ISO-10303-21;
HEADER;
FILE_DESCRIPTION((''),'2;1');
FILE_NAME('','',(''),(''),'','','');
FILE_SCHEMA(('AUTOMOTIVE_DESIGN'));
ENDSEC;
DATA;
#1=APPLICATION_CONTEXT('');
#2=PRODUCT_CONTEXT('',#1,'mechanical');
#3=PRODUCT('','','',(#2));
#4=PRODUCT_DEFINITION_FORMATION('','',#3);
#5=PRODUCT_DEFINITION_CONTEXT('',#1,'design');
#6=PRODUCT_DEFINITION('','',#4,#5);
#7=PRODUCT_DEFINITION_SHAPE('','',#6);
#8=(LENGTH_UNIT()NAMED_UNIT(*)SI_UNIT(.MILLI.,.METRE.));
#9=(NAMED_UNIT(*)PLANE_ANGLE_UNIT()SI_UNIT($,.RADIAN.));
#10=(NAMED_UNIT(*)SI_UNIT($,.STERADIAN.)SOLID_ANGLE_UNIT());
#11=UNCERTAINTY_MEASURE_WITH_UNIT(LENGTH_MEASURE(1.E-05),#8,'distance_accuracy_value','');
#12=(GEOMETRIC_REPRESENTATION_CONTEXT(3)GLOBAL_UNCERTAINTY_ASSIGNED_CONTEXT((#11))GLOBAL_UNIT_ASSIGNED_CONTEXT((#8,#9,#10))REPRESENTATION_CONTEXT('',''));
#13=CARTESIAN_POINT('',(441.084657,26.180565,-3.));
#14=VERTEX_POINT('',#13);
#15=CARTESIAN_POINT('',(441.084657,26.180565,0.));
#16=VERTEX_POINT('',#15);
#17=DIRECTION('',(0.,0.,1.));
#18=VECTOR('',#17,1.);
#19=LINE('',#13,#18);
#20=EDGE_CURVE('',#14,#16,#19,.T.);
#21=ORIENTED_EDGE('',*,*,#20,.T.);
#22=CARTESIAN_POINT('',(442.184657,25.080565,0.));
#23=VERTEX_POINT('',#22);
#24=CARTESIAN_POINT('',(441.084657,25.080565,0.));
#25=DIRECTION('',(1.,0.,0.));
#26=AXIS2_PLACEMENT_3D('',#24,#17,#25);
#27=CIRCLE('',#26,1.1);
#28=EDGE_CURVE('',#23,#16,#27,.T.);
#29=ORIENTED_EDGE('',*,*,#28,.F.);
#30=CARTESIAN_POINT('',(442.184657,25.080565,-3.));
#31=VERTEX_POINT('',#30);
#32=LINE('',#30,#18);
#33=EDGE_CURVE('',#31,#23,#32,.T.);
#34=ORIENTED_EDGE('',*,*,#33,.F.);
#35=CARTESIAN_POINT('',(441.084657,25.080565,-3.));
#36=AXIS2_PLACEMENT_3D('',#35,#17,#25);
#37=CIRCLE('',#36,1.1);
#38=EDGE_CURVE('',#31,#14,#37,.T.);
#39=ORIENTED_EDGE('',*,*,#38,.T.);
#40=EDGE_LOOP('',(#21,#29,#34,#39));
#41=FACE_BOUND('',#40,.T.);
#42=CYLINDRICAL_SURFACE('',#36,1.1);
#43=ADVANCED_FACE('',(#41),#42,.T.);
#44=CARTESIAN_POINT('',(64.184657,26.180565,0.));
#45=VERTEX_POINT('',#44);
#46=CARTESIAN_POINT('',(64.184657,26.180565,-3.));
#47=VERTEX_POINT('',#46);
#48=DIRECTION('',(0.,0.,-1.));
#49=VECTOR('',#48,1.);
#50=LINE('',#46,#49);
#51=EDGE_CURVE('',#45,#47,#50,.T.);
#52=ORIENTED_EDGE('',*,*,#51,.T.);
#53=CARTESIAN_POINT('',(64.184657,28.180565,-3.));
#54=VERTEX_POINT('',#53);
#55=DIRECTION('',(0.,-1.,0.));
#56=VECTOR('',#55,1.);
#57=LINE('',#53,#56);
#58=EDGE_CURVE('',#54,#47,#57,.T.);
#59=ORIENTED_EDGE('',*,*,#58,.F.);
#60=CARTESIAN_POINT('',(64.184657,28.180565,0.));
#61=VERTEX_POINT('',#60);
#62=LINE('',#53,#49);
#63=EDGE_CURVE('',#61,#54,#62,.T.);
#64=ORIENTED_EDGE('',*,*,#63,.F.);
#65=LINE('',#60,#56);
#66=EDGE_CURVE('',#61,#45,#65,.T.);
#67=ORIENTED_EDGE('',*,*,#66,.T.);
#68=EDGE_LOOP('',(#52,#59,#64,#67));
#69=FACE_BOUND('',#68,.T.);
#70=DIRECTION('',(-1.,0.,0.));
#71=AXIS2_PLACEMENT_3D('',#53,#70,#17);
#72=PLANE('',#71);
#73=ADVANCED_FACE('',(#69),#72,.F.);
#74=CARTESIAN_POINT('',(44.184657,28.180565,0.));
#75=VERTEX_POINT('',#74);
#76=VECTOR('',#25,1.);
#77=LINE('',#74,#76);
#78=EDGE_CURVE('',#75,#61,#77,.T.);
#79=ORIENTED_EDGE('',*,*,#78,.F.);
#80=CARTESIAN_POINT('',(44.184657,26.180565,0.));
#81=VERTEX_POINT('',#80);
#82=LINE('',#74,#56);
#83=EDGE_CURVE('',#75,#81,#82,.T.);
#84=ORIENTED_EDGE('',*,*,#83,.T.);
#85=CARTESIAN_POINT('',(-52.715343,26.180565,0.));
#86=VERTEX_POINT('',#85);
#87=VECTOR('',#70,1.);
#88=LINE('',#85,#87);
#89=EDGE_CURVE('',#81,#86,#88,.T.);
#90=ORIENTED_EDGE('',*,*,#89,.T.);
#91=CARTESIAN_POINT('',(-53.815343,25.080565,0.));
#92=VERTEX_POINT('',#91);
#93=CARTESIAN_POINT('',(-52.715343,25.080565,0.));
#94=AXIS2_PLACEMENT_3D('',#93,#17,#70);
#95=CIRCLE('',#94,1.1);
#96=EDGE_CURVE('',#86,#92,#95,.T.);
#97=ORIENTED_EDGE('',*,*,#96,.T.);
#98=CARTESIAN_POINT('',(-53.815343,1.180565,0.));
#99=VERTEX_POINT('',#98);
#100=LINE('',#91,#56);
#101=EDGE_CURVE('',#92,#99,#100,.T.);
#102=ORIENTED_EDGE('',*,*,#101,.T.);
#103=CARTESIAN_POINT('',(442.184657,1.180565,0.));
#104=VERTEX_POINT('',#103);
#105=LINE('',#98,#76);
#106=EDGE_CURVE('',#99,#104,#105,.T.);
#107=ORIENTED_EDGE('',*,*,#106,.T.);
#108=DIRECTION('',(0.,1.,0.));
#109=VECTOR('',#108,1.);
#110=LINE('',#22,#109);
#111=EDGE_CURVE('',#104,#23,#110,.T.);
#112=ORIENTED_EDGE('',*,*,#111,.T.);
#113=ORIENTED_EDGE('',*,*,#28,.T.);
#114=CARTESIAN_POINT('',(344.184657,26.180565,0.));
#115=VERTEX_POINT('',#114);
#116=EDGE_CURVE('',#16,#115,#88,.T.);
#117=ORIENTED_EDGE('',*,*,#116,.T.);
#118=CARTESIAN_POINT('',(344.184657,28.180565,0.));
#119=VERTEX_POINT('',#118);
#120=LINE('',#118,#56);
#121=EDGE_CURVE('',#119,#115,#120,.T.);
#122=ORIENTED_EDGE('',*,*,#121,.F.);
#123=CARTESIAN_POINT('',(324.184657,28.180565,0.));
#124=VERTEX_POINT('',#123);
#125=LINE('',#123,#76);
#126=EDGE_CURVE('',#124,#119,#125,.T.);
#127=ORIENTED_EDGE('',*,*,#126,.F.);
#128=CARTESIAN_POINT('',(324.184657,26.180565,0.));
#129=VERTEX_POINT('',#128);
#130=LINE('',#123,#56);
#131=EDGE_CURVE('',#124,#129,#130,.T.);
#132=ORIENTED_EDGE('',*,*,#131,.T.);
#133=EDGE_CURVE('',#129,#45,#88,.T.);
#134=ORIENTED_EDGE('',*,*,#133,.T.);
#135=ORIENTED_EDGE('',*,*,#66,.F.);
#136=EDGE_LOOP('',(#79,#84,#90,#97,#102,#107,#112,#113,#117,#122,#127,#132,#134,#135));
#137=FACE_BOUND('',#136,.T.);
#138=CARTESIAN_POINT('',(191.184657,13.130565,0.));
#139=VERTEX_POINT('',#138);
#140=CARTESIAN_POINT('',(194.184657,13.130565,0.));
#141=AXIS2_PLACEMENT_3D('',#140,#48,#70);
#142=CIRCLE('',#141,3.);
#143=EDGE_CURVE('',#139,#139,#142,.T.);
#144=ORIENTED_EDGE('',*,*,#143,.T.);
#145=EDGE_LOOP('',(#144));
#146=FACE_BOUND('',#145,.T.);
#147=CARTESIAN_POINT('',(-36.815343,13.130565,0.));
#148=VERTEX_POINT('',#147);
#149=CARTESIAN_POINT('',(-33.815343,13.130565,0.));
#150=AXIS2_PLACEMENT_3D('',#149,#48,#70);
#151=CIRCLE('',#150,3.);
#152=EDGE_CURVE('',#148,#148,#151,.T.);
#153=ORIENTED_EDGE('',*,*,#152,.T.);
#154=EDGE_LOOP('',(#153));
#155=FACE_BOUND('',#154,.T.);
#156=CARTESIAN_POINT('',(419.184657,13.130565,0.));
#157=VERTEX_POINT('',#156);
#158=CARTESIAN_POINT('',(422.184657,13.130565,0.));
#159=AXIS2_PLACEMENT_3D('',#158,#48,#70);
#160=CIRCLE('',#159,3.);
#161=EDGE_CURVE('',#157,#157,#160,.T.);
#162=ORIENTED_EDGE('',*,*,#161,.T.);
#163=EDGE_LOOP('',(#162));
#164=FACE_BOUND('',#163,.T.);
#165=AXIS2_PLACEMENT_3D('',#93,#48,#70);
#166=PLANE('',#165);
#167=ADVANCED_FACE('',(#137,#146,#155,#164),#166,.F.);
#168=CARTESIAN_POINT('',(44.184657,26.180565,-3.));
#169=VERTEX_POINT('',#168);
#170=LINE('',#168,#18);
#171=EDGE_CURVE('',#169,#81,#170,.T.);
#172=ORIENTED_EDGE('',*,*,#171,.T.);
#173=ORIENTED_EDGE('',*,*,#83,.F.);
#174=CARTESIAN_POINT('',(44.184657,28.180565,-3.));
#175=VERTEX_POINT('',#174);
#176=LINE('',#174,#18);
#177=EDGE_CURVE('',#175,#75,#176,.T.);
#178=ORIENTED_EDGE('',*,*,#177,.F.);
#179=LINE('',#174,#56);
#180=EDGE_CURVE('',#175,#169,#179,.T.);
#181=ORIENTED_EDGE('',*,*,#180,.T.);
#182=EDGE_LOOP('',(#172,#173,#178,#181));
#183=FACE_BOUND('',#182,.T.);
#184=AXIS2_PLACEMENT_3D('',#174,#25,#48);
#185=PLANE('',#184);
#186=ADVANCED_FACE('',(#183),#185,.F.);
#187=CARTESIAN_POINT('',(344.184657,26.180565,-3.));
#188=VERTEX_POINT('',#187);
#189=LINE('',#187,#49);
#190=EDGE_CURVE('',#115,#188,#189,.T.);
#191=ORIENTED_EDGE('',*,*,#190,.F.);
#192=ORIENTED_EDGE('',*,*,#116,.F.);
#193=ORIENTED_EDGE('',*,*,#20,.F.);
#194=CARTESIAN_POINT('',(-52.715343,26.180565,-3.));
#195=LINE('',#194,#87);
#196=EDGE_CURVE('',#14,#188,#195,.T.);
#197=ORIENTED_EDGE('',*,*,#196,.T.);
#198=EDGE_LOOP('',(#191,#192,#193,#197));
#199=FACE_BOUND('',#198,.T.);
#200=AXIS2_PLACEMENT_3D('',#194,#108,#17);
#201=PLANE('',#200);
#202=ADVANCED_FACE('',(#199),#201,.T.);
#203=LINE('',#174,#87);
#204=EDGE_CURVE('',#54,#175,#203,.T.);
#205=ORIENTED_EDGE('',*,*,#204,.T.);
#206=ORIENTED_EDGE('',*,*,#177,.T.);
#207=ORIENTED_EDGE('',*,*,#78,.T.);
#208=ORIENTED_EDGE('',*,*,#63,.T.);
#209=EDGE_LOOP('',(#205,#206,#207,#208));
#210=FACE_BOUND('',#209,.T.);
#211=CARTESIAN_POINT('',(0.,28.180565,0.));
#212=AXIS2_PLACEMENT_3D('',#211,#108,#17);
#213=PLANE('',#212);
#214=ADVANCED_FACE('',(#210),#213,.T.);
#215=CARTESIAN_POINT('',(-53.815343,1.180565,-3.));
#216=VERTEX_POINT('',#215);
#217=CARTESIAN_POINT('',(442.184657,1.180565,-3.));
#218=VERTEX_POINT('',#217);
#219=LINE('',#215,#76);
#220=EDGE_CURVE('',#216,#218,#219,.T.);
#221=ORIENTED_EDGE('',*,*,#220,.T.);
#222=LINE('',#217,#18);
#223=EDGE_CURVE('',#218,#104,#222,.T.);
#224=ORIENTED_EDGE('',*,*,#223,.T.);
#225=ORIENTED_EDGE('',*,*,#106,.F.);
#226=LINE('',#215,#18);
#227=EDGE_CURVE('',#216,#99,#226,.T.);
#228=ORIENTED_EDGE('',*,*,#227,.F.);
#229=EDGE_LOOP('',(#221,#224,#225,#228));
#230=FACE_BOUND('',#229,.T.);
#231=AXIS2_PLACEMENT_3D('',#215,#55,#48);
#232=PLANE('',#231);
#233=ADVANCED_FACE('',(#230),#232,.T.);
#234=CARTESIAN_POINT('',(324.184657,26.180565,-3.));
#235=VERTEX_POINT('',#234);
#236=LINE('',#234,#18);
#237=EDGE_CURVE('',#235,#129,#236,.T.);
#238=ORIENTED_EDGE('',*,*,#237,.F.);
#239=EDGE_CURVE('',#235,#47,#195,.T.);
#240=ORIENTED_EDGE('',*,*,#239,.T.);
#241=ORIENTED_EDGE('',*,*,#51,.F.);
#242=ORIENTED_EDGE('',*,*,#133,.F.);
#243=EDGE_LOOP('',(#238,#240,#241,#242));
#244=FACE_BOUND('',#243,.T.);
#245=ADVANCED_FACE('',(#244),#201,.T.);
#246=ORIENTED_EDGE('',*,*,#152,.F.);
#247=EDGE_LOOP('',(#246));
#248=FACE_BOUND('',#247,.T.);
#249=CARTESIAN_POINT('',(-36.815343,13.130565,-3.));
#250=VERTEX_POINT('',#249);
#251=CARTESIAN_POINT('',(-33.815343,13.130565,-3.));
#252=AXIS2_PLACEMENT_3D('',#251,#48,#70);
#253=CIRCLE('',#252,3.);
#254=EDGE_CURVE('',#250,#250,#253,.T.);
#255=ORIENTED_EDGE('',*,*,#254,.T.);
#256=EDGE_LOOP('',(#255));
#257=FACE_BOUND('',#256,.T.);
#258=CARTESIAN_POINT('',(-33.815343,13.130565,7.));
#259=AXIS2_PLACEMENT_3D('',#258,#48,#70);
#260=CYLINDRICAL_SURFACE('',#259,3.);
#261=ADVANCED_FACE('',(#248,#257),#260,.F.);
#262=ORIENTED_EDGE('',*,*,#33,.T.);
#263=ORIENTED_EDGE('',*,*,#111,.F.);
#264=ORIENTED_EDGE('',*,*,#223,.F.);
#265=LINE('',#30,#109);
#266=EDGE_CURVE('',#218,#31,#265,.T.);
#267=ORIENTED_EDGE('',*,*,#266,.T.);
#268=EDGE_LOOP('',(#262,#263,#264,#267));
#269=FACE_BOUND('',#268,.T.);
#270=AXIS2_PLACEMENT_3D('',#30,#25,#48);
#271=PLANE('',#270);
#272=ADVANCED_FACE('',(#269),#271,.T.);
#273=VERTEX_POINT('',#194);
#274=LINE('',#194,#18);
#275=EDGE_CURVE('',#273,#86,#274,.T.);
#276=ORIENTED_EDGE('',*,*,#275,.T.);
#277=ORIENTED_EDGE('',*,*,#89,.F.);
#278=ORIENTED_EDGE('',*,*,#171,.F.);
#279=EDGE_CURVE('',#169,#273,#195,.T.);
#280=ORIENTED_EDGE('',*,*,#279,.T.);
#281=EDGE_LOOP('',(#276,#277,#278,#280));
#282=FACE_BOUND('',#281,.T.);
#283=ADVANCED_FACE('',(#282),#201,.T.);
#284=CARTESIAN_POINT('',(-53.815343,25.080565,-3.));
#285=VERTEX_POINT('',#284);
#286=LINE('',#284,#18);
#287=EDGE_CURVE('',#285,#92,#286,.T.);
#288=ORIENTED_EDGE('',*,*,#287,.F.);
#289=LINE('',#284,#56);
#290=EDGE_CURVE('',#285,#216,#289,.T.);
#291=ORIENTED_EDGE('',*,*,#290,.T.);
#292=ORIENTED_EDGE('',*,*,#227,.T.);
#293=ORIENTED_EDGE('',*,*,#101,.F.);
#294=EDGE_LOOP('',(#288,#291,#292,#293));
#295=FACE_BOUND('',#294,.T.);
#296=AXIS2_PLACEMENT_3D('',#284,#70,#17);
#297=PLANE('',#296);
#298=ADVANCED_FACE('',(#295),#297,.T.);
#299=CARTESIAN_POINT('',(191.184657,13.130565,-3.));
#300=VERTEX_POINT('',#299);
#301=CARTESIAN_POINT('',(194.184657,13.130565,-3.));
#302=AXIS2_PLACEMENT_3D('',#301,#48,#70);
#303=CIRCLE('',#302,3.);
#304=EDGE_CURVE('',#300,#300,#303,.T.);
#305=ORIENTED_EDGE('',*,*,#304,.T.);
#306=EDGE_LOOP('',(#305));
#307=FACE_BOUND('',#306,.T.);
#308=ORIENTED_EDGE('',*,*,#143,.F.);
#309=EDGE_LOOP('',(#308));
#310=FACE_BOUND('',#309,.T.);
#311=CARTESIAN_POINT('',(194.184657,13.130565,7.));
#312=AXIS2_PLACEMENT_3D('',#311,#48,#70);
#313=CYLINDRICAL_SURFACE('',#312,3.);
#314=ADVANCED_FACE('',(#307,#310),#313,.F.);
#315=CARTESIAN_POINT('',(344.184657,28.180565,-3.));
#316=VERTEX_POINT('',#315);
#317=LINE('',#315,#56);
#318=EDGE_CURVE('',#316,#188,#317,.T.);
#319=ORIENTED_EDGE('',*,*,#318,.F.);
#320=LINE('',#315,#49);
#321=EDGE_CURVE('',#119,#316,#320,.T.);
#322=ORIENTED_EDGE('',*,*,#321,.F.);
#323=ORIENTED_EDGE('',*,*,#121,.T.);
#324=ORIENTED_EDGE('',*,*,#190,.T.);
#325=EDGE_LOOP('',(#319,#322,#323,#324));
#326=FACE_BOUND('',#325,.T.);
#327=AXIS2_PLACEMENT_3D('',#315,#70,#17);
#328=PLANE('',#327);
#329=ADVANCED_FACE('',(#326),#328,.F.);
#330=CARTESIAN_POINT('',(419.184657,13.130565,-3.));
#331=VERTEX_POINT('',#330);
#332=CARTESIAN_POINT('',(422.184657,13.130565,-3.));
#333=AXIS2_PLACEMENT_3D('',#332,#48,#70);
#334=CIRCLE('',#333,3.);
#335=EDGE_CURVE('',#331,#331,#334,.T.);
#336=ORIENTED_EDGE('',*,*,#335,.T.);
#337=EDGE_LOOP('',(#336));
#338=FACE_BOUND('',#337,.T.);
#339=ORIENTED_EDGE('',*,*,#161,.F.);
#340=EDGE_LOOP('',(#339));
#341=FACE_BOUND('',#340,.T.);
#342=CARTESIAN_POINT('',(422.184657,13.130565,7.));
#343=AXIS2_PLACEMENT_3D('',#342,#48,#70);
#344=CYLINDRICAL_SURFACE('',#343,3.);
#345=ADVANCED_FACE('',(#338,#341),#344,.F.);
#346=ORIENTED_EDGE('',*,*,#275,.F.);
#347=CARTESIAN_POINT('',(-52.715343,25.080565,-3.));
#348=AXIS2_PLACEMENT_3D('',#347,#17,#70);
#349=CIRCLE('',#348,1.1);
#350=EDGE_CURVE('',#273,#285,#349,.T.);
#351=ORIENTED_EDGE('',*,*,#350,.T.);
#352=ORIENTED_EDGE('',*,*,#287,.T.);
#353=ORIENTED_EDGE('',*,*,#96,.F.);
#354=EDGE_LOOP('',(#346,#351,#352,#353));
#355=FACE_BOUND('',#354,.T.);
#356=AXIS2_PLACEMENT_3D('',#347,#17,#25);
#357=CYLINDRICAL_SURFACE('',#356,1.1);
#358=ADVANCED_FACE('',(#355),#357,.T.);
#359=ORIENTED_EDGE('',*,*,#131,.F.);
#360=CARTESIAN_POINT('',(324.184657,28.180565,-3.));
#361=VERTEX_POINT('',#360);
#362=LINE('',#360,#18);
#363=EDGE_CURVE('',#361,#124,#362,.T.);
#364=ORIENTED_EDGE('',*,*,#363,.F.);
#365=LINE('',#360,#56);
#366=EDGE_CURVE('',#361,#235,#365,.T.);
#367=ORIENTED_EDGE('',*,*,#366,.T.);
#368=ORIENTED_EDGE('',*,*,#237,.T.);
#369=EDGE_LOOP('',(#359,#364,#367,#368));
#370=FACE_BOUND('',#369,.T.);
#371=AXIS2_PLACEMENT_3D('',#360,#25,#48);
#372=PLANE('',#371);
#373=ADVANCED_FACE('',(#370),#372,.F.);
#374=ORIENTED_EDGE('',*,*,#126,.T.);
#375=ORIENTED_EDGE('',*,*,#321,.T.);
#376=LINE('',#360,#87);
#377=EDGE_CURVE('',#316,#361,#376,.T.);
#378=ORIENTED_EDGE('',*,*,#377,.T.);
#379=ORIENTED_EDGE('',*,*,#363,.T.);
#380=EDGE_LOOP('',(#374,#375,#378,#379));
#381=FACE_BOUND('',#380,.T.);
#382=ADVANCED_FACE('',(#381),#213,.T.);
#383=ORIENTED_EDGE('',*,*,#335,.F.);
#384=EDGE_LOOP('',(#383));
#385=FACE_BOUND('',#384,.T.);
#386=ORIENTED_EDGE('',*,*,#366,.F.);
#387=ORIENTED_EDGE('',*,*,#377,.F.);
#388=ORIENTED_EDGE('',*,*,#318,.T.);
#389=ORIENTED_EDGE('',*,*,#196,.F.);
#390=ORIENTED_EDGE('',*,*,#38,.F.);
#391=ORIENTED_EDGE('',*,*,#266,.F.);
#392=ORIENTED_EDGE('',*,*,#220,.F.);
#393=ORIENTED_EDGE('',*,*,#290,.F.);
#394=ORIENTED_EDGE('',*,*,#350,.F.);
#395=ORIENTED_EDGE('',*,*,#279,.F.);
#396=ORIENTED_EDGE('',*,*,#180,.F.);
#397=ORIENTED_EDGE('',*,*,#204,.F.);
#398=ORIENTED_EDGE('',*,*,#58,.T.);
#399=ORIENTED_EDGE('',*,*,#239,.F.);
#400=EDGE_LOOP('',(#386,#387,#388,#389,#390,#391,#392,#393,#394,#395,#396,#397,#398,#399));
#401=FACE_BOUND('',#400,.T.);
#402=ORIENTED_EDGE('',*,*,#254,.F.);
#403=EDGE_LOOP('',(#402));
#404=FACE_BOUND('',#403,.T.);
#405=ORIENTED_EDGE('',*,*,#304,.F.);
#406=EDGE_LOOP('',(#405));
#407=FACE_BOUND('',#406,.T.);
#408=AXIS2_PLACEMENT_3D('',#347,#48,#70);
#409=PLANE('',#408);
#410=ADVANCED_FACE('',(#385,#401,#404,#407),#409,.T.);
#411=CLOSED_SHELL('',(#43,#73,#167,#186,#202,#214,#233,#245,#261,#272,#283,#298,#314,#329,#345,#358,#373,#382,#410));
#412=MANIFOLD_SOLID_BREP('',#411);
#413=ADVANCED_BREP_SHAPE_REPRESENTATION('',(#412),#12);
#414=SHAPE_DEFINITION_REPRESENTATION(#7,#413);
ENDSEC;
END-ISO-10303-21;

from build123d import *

# Parameters (mm, degrees)
SM_BASE_FLANGE_1_DEPTH = 3
SKETCH_4_W             = 20
SKETCH_4_H             = 3
EXTRUDE_1_DEPTH        = 2
SKETCH_5_R             = 3
CUT_EXTRUDE_1_DEPTH    = 10


# Sheet-metal steps are written as plain solids
with BuildPart() as part:
    # Sketch 1 → Базовая кромка1 (new body)
    with BuildSketch(Plane.XY):
        with BuildLine():
            Line((-52.715343227, 26.180564784), (441.084656773, 26.180564784))
            ThreePointArc((441.084656773, 26.180564784), (441.862474232, 25.858382243), (442.184656773, 25.080564784))
            Line((442.184656773, 25.080564784), (442.184656773, 1.180564784))
            Line((442.184656773, 1.180564784), (-53.815343227, 1.180564784))
            Line((-53.815343227, 1.180564784), (-53.815343227, 25.080564784))
            ThreePointArc((-53.815343227, 25.080564784), (-53.493160687, 25.858382243), (-52.715343227, 26.180564784))
        make_face()
    extrude(amount=-SM_BASE_FLANGE_1_DEPTH)

    # Эскиз4 → Бобышка-Вытянуть1 (add)
    with BuildSketch(Plane(origin=(0, 26.180564784, 0), x_dir=(1, 0, 0), z_dir=(0, 1, 0))):
        with Locations((54.184656773, 1.5)):
            Rectangle(SKETCH_4_W, SKETCH_4_H)
        with Locations((334.184656773, 1.5)):
            Rectangle(SKETCH_4_W, SKETCH_4_H)
    extrude(amount=EXTRUDE_1_DEPTH)

    # Эскиз5 → Вырез-Вытянуть1 (cut)
    with BuildSketch(Plane(origin=(0, 0, -3), x_dir=(-1, 0, 0), z_dir=(0, 0, -1))):
        with Locations((-422.184656773, 13.130564784)):
            Circle(SKETCH_5_R)
        with Locations((-194.184656773, 13.130564784)):
            Circle(SKETCH_5_R)
        with Locations((33.815343227, 13.130564784)):
            Circle(SKETCH_5_R)
    extrude(amount=-CUT_EXTRUDE_1_DEPTH, mode=Mode.SUBTRACT)


solid = part.part
